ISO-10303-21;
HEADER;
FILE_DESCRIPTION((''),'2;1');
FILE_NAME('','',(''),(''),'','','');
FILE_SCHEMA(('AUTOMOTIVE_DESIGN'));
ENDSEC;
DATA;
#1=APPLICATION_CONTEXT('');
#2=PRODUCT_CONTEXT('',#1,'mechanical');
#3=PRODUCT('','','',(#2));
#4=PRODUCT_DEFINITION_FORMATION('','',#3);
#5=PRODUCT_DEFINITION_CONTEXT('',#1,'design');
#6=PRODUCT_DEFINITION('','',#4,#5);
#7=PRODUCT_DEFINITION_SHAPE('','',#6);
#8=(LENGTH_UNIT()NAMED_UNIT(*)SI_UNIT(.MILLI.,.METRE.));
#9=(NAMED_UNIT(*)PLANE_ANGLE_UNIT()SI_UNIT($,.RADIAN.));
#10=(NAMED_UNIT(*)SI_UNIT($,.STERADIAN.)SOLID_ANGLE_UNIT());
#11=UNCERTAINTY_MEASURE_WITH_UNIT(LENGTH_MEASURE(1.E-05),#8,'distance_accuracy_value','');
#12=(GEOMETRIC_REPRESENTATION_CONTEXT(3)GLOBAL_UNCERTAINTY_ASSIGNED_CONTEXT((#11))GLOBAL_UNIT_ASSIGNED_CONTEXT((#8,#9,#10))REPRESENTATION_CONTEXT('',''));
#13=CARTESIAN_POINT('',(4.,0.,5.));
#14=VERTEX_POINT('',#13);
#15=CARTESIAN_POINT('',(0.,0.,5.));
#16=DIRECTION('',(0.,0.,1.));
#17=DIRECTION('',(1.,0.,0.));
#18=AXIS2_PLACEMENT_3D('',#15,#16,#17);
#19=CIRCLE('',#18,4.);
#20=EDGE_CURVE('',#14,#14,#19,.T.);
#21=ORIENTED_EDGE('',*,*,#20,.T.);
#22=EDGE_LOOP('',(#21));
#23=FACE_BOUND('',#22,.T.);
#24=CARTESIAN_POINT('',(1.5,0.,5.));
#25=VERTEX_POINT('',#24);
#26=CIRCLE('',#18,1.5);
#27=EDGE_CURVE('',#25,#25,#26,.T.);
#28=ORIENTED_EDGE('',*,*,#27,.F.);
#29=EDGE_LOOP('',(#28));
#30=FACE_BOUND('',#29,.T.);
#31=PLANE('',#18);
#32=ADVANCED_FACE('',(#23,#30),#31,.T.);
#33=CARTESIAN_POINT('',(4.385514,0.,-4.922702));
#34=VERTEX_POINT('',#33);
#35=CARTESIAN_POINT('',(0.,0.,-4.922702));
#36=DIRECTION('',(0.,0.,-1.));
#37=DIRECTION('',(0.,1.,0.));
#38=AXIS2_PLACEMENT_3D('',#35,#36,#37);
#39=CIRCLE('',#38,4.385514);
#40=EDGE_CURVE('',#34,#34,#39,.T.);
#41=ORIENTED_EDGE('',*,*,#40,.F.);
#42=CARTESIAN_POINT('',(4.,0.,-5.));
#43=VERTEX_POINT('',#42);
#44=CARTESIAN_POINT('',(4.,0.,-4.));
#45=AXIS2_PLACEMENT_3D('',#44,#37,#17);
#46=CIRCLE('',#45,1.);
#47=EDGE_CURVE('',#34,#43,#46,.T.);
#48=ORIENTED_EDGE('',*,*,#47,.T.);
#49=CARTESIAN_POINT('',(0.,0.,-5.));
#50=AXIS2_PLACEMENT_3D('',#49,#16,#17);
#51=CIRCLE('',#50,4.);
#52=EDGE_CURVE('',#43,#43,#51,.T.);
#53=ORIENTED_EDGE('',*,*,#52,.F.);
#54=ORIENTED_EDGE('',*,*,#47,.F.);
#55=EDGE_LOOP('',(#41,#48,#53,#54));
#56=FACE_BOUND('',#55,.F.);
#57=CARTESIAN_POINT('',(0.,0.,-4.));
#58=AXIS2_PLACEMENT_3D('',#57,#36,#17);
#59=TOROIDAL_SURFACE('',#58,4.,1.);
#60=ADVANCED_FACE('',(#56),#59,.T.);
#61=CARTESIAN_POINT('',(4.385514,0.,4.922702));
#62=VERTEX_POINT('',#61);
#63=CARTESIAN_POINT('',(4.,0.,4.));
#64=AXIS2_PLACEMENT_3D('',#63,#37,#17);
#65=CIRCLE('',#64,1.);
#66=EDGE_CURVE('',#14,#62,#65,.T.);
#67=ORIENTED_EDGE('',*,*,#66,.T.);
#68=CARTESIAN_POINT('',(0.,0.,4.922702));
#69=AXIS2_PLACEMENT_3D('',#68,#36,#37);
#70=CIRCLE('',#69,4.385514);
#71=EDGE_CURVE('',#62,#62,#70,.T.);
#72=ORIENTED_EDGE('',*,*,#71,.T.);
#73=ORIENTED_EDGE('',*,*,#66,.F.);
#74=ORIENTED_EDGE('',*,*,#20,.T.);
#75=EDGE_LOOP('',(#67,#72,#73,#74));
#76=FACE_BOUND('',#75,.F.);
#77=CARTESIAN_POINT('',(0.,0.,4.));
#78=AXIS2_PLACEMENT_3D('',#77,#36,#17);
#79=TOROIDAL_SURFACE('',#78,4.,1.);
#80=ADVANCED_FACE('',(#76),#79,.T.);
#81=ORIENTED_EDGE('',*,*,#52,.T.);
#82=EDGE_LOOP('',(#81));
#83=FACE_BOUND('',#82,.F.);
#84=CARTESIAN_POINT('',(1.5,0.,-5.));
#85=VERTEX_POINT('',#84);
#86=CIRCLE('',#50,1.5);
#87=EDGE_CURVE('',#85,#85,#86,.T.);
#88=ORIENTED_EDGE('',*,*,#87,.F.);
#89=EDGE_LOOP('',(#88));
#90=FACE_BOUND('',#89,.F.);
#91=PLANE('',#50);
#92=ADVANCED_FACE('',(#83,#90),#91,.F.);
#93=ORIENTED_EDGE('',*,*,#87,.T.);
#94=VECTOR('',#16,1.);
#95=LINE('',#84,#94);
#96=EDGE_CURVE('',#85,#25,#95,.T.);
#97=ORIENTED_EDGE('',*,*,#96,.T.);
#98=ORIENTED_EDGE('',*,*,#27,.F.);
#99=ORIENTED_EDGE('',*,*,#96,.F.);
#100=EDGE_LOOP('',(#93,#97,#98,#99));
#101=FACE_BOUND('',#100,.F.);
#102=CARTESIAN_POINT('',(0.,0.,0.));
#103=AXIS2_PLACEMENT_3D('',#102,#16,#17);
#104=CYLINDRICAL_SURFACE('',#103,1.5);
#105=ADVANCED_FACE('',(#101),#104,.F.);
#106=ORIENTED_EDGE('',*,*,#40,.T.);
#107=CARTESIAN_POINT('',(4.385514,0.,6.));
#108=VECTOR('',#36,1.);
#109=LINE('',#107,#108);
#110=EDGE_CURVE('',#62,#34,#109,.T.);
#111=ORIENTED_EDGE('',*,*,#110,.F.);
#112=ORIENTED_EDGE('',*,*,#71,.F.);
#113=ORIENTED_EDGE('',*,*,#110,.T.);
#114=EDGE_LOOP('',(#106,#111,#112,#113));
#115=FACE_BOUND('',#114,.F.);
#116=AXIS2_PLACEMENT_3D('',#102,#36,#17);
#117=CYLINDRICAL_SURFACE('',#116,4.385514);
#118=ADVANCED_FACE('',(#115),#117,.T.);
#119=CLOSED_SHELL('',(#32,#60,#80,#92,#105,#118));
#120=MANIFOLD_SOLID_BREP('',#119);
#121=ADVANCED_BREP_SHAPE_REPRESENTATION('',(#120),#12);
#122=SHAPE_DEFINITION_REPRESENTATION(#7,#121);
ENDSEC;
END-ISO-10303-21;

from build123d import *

# Parameters (mm, degrees)
F0_R      = 40
F0_R_2    = 35
F1_DEPTH  = 5
F2_R      = 4.99999
F3_DEPTH  = 2.5
F4_R      = 5
F5_DEPTH  = 5
F6_R      = 1.5
F7_DEPTH  = 5
F9_DEPTH  = 2.5
F10_R     = 1
F11_R     = 44.5515786246
F11_R_2   = 4.3855137127
F12_DEPTH = 6


# Not quite as in the source:
# - a fillet or chamfer is up to 0.001 mm smaller than in the source, because OpenCascade refuses the exact size


with BuildPart() as f1:
    # F0 (on Top) → F1 (new body, symmetric)
    with BuildSketch(Plane.XY):
        Circle(F0_R)
        Circle(F0_R_2, mode=Mode.SUBTRACT)
    extrude(amount=F1_DEPTH, both=True)

    # F2 (radius 5 in the source; OpenCascade refuses exactly that, so slightly less here)
    f2_edges = [f1.edges().sort_by_distance(p)[0] for p in [
        (-40, 0, 5),
        (-40, 0, -5),
    ]]
    fillet(f2_edges, radius=F2_R)

    # F0 (on Top) → F3 (join, symmetric)
    with BuildSketch(Plane.XY):
        Circle(F0_R_2)
    extrude(amount=F3_DEPTH, both=True)

    # F4 (on Top) → F5 (join, symmetric)
    with BuildSketch(Plane.XY):
        Circle(F4_R)
    extrude(amount=F5_DEPTH, both=True)

    # F6 (on Top) → F7 (cut, symmetric)
    with BuildSketch(Plane.XY):
        Circle(F6_R)
    extrude(amount=F7_DEPTH, both=True, mode=Mode.SUBTRACT)

    # F8 (on Top) → F9 (cut, symmetric)
    with BuildSketch(Plane.XY):
        with BuildLine():
            ThreePointArc((-30.0140328654, 11.8585631023), (-31.0869388877, 8.7208064041), (-31.7860568579, 5.4792206049))
            ThreePointArc((-31.7860568579, 5.4792206049), (-31.3779575205, 3.9314640765), (-29.9653471981, 3.1787174941))
            Line((-29.9653471981, 3.1787174941), (-8.8751398211, 1.5323311534))
            ThreePointArc((-8.8751398211, 1.5323311534), (-7.8337940647, 2.2616563361), (-8.3497989023, 3.4235751))
            Line((-8.3497989023, 3.4235751), (-27.2676686416, 12.89044574))
            ThreePointArc((-27.2676686416, 12.89044574), (-28.866135701, 12.9741021828), (-30.0140328654, 11.8585631023))
        make_face()
        with BuildLine():
            ThreePointArc((-30.3900590314, -11.1791820248), (-29.2627563738, -12.3155288285), (-27.6630266578, -12.2611213303))
            Line((-27.6630266578, -12.2611213303), (-8.5751781278, -3.1418300373))
            ThreePointArc((-8.5751781278, -3.1418300373), (-8.03800884, -1.9895430233), (-9.0658415198, -1.2412942754))
            Line((-9.0658415198, -1.2412942754), (-30.1826326195, -2.5016786765))
            ThreePointArc((-30.1826326195, -2.5016786765), (-31.6087739214, -3.2284636015), (-32.0451124866, -4.7684973663))
            ThreePointArc((-32.0451124866, -4.7684973663), (-31.4053980086, -8.022327389), (-30.3900590314, -11.1791820248))
        make_face()
        with BuildLine():
            ThreePointArc((-20.8518881352, -24.9077829753), (-19.3074419941, -25.328236846), (-17.9492391699, -24.4812537124))
            Line((-17.9492391699, -24.4812537124), (-5.978323086, -7.0397915232))
            ThreePointArc((-5.978323086, -7.0397915232), (-6.0892643436, -5.7732970527), (-7.3535179291, -5.6392109685))
            Line((-7.3535179291, -5.6392109685), (-25.0110032673, -17.2891314283))
            ThreePointArc((-25.0110032673, -17.2891314283), (-25.8826854016, -18.6316162874), (-25.4905488012, -20.183493933))
            ThreePointArc((-25.4905488012, -20.183493933), (-23.3096248008, -22.6815361533), (-20.8518881352, -24.9077829753))
        make_face()
        with BuildLine():
            ThreePointArc((-5.7272893582, -32.0280147088), (-4.1795328299, -31.6199153714), (-3.4267862475, -30.207305049))
            Line((-3.4267862475, -30.207305049), (-1.7803999068, -9.117097672))
            ThreePointArc((-1.7803999068, -9.117097672), (-2.5097250895, -8.0757519156), (-3.6716438534, -8.5917567532))
            Line((-3.6716438534, -8.5917567532), (-13.1385144934, -27.5096264925))
            ThreePointArc((-13.1385144934, -27.5096264925), (-13.2221709361, -29.1080935518), (-12.1066318557, -30.2559907163))
            ThreePointArc((-12.1066318557, -30.2559907163), (-8.9688751575, -31.3288967386), (-5.7272893582, -32.0280147088))
        make_face()
        with BuildLine():
            ThreePointArc((10.9311132714, -30.6320168823), (12.0674600751, -29.5047142247), (12.0130525769, -27.9049845086))
            Line((12.0130525769, -27.9049845086), (2.8937612839, -8.8171359787))
            ThreePointArc((2.8937612839, -8.8171359787), (1.7414742699, -8.2799666909), (0.993225522, -9.3077993707))
            Line((0.993225522, -9.3077993707), (2.2536099231, -30.4245904704))
            ThreePointArc((2.2536099231, -30.4245904704), (2.9803948481, -31.8507317723), (4.5204286129, -32.2870703374))
            ThreePointArc((4.5204286129, -32.2870703374), (7.7742586356, -31.6473558595), (10.9311132714, -30.6320168823))
        make_face()
        with BuildLine():
            ThreePointArc((24.6597142219, -21.0938459861), (25.0801680926, -19.549399845), (24.233184959, -18.1911970208))
            Line((24.233184959, -18.1911970208), (6.7917227698, -6.2202809368))
            ThreePointArc((6.7917227698, -6.2202809368), (5.5252282993, -6.3312221945), (5.3911422152, -7.5954757799))
            Line((5.3911422152, -7.5954757799), (17.0410626749, -25.2529611182))
            ThreePointArc((17.0410626749, -25.2529611182), (18.383547534, -26.1246432525), (19.9354251796, -25.7325066521))
            ThreePointArc((19.9354251796, -25.7325066521), (22.4334673999, -23.5515826517), (24.6597142219, -21.0938459861))
        make_face()
        with BuildLine():
            ThreePointArc((31.7799459554, -5.9692472091), (31.371846618, -4.4214906808), (29.9592362956, -3.6687440984))
            Line((29.9592362956, -3.6687440984), (8.8690289186, -2.0223577577))
            ThreePointArc((8.8690289186, -2.0223577577), (7.8276831622, -2.7516829403), (8.3436879998, -3.9136017043))
            Line((8.3436879998, -3.9136017043), (27.2615577391, -13.3804723443))
            ThreePointArc((27.2615577391, -13.3804723443), (28.8600247985, -13.464128787), (30.0079219629, -12.3485897066))
            ThreePointArc((30.0079219629, -12.3485897066), (31.0808279852, -9.2108330083), (31.7799459554, -5.9692472091))
        make_face()
        with BuildLine():
            ThreePointArc((30.3839481289, 10.6891554205), (29.2566454713, 11.8255022243), (27.6569157553, 11.7710947261))
            Line((27.6569157553, 11.7710947261), (8.5690672253, 2.651803433))
            ThreePointArc((8.5690672253, 2.651803433), (8.0318979375, 1.499516419), (9.0597306173, 0.7512676711))
            Line((9.0597306173, 0.7512676711), (30.176521717, 2.0116520722))
            ThreePointArc((30.176521717, 2.0116520722), (31.6026630189, 2.7384369973), (32.0390015841, 4.2784707621))
            ThreePointArc((32.0390015841, 4.2784707621), (31.3992871061, 7.5323007848), (30.3839481289, 10.6891554205))
        make_face()
        with BuildLine():
            ThreePointArc((20.8457772327, 24.417756371), (19.3013310916, 24.8382102418), (17.9431282674, 23.9912271081))
            Line((17.9431282674, 23.9912271081), (5.9722121835, 6.5497649189))
            ThreePointArc((5.9722121835, 6.5497649189), (6.0831534411, 5.2832704484), (7.3474070266, 5.1491843643))
            Line((7.3474070266, 5.1491843643), (25.0048923648, 16.799104824))
            ThreePointArc((25.0048923648, 16.799104824), (25.8765744991, 18.1415896832), (25.4844378987, 19.6934673287))
            ThreePointArc((25.4844378987, 19.6934673287), (23.3035138983, 22.191509549), (20.8457772327, 24.417756371))
        make_face()
        with BuildLine():
            ThreePointArc((5.7211784557, 31.5379881045), (4.1734219274, 31.1298887671), (3.420675345, 29.7172784447))
            Line((3.420675345, 29.7172784447), (1.7742890043, 8.6270710677))
            ThreePointArc((1.7742890043, 8.6270710677), (2.503614187, 7.5857253113), (3.6655329509, 8.1017301489))
            Line((3.6655329509, 8.1017301489), (13.1324035909, 27.0195998883))
            ThreePointArc((13.1324035909, 27.0195998883), (13.2160600336, 28.6180669476), (12.1005209532, 29.7659641121))
            ThreePointArc((12.1005209532, 29.7659641121), (8.9627642549, 30.8388701343), (5.7211784557, 31.5379881045))
        make_face()
        with BuildLine():
            ThreePointArc((-10.9372241739, 30.141990278), (-12.0735709776, 29.0146876204), (-12.0191634794, 27.4149579044))
            Line((-12.0191634794, 27.4149579044), (-2.8998721864, 8.3271093745))
            ThreePointArc((-2.8998721864, 8.3271093745), (-1.7475851724, 7.7899400866), (-0.9993364245, 8.8177727664))
            Line((-0.9993364245, 8.8177727664), (-2.2597208256, 29.9345638662))
            ThreePointArc((-2.2597208256, 29.9345638662), (-2.9865057506, 31.360705168), (-4.5265395155, 31.7970437332))
            ThreePointArc((-4.5265395155, 31.7970437332), (-7.7803695381, 31.1573292552), (-10.9372241739, 30.141990278))
        make_face()
        with BuildLine():
            ThreePointArc((-24.6658251244, 20.6038193818), (-25.0862789951, 19.0593732407), (-24.2392958615, 17.7011704166))
            Line((-24.2392958615, 17.7011704166), (-6.7978336723, 5.7302543326))
            ThreePointArc((-6.7978336723, 5.7302543326), (-5.5313392018, 5.8411955902), (-5.3972531177, 7.1054491757))
            Line((-5.3972531177, 7.1054491757), (-17.0471735774, 24.7629345139))
            ThreePointArc((-17.0471735774, 24.7629345139), (-18.3896584365, 25.6346166482), (-19.9415360821, 25.2424800479))
            ThreePointArc((-19.9415360821, 25.2424800479), (-22.4395783024, 23.0615560474), (-24.6658251244, 20.6038193818))
        make_face()
    extrude(amount=F9_DEPTH, both=True, mode=Mode.SUBTRACT)

    # F10
    f10_edges = [f1.edges().sort_by_distance(p)[0] for p in [
        (-19.420244, 2.355524, 2.5),
        (-17.808734, 8.15701, 2.5),
        (-35, 0, -2.5),
        (23.303514, 22.19151, -2.5),
        (7.774259, -31.647356, -2.5),
        (15.512454, -12.205739, -2.5),
        (11.216102, -16.424218, -2.5),
        (25.080168, -19.5494, -2.5),
        (17.802623, -8.647037, -2.5),
        (-8.405079, -18.050692, -2.5),
        (-8.968875, -31.328897, -2.5),
        (7.453407, -18.36106, -2.5),
        (-25.086279, 19.059373, -2.5),
        (-12.073571, 29.014688, -2.5),
        (-23.309625, -22.681536, -2.5),
        (-16.182261, -11.464171, -2.5),
        (-31.086939, 8.720806, -2.5),
        (-11.963781, -15.760523, -2.5),
        (-29.262756, -12.315529, -2.5),
        (-31.405398, -8.022327, -2.5),
        (-18.119102, -7.701476, -2.5),
        (-22.439578, 23.061556, -2.5),
        (-17.808734, 8.15701, -2.5),
        (-11.222213, 15.934192, -2.5),
        (8.962764, 30.83887, -2.5),
        (16.17615, 10.974145, -2.5),
        (31.080828, -9.210833, -2.5),
        (18.383548, -26.124643, -2.5),
        (18.112991, 7.211449, -2.5),
        (31.399287, 7.532301, -2.5),
        (11.95767, 15.270496, -2.5),
        (2.503614, 7.585725, -2.5),
        (-7.78037, 31.157329, -2.5),
        (22.433467, -23.551583, -2.5),
        (-2.986506, 31.360705, -2.5),
        (-13.222171, -29.108094, -2.5),
        (-7.459518, 17.871034, -2.5),
        (-25.882685, -18.631616, -2.5),
        (8.398968, 17.560665, -2.5),
        (-5, 0, -5),
        (16.17615, 10.974145, 2.5),
        (25.876574, 18.14159, -2.5),
        (-2.603593, -19.662201, -2.5),
        (1.623418, -19.866195, 2.5),
        (1.623418, -19.866195, -2.5),
        (7.774259, -31.647356, 2.5),
        (11.216102, -16.424218, 2.5),
        (31.371847, -4.421491, -2.5),
        (19.618126, 1.38146, -2.5),
        (29.256645, 11.825502, -2.5),
        (-8.405079, -18.050692, 2.5),
        (-19.941536, 25.24248, 0),
        (-35, 0, 2.5),
        (-8.968875, -31.328897, 2.5),
        (-4.179533, -31.619915, -2.5),
        (7.453407, -18.36106, 2.5),
        (-11.222213, 15.934192, 2.5),
        (-15.518565, 11.715712, -2.5),
        (-5.531339, 5.841196, -2.5),
        (-28.866136, 12.974102, -2.5),
        (-15.518565, 11.715712, 2.5),
        (-25.882685, -18.631616, 2.5),
        (24.233185, -18.191197, 0),
        (4.520429, -32.28707, 0),
        (-23.309625, -22.681536, 2.5),
        (10.931113, -30.632017, 0),
        (-16.182261, -11.464171, 2.5),
        (-6.089264, -5.773297, -2.5),
        (5.721178, 31.537988, 0),
        (-12.106632, -30.255991, 0),
        (-11.963781, -15.760523, 2.5),
        (-31.608774, -3.228464, -2.5),
        (20.845777, 24.417756, 0),
        (-31.405398, -8.022327, 2.5),
        (-19.624237, -1.871486, -2.5),
        (-8.038009, -1.989543, -2.5),
        (-31.086939, 8.720806, 2.5),
        (-25.086279, 19.059373, 2.5),
        (-18.389658, 25.634617, -2.5),
        (-22.439578, 23.061556, 2.5),
        (5.391142, -7.595476, 0),
        (17.041063, -25.252961, 0),
        (-31.377958, 3.931464, -2.5),
        (24.659714, -21.093846, 0),
        (19.935425, -25.732507, 0),
        (27.261558, -13.380472, 0),
        (-5, 0, 2.5),
        (-7.459518, 17.871034, 2.5),
        (-30.014033, 11.858563, 0),
        (4.173422, 31.129889, -2.5),
        (13.21606, 28.618067, -2.5),
        (8.962764, 30.83887, 2.5),
        (2.597482, 19.172175, -2.5),
        (-4.52654, 31.797044, 0),
        (19.301331, 24.83821, -2.5),
        (-10.937224, 30.14199, 0),
        (-2.259721, 29.934564, 0),
        (-12.019163, 27.414958, 0),
        (23.303514, 22.19151, 2.5),
        (3.665533, 8.10173, 0),
        (-27.663027, -12.261121, 0),
        (-30.390059, -11.179182, 0),
        (-25.011003, -17.289131, 0),
        (-20.851888, -24.907783, 0),
        (-25.490549, -20.183494, 0),
        (-3.671644, -8.591757, 0),
        (22.433467, -23.551583, 2.5),
        (2.893761, -8.817136, 0),
        (25.080168, -19.5494, 2.5),
        (-5, 0, -2.5),
        (19.414133, -2.845551, 2.5),
        (19.414133, -2.845551, -2.5),
        (18.383548, -26.124643, 2.5),
        (-2.509725, -8.075752, -2.5),
        (18.112991, 7.211449, 2.5),
        (6.083153, 5.28327, -2.5),
        (8.398968, 17.560665, 2.5),
        (17.802623, -8.647037, 2.5),
        (15.512454, -12.205739, 2.5),
        (31.080828, -9.210833, 2.5),
        (6.791723, -6.220281, 0),
        (1.741474, -8.279967, -2.5),
        (-7.833794, 2.261656, -2.5),
        (28.860025, -13.464129, -2.5),
        (11.95767, 15.270496, 2.5),
        (-1.747585, 7.78994, -2.5),
        (-7.78037, 31.157329, 2.5),
        (-27.267669, 12.890446, 0),
        (-19.307442, -25.328237, -2.5),
        (8.343688, -3.913602, 0),
        (19.618126, 1.38146, 2.5),
        (-13.138514, -27.509626, 0),
        (31.602663, 2.738437, -2.5),
        (12.06746, -29.504714, -2.5),
        (-18.119102, -7.701476, 2.5),
        (2.980395, -31.850732, -2.5),
        (-19.624237, -1.871486, 2.5),
        (7.827683, -2.751683, -2.5),
        (5.525228, -6.331222, -2.5),
        (-7.833794, 2.261656, 2.5),
        (1.741474, -8.279967, 2.5),
        (2.980395, -31.850732, 2.5),
        (12.06746, -29.504714, 2.5),
        (-19.307442, -25.328237, 2.5),
        (-2.603593, -19.662201, 2.5),
        (-2.509725, -8.075752, 2.5),
        (-8.87514, 1.532331, 0),
        (-13.222171, -29.108094, 2.5),
        (-4.179533, -31.619915, 2.5),
        (-31.786057, 5.479221, 0),
        (-8.349799, 3.423575, 0),
        (-5.531339, 5.841196, 2.5),
        (2.25361, -30.42459, 0),
        (-6.089264, -5.773297, 2.5),
        (12.013053, -27.904985, 0),
        (-29.262756, -12.315529, 2.5),
        (25.484438, 19.693467, 0),
        (-31.608774, -3.228464, 2.5),
        (32.039002, 4.278471, 0),
        (30.383948, 10.689155, 0),
        (-8.038009, -1.989543, 2.5),
        (9.059731, 0.751268, 0),
        (-28.866136, 12.974102, 2.5),
        (-18.389658, 25.634617, 2.5),
        (31.779946, -5.969247, 0),
        (30.007922, -12.34859, 0),
        (27.656916, 11.771095, 0),
        (4.173422, 31.129889, 2.5),
        (-6.797834, 5.730254, 0),
        (2.597482, 19.172175, 2.5),
        (19.301331, 24.83821, 2.5),
        (-19.420244, 2.355524, -2.5),
        (25.876574, 18.14159, 2.5),
        (-29.965347, 3.178717, 0),
        (6.083153, 5.28327, 2.5),
        (29.959236, -3.668744, 0),
        (-5.397253, 7.105449, 0),
        (2.503614, 7.585725, 2.5),
        (-8.575178, -3.14183, 0),
        (-9.065842, -1.241294, 0),
        (-30.182633, -2.501679, 0),
        (-32.045112, -4.768497, 0),
        (-17.949239, -24.481254, 0),
        (-5.978323, -7.039792, 0),
        (-7.353518, -5.639211, 0),
        (12.100521, 29.765964, 0),
        (-3.426786, -30.207305, 0),
        (-1.7804, -9.117098, 0),
        (30.176522, 2.011652, 0),
        (31.371847, -4.421491, 2.5),
        (25.004892, 16.799105, 0),
        (13.21606, 28.618067, 2.5),
        (-24.665825, 20.603819, 0),
        (17.943128, 23.991227, 0),
        (31.399287, 7.532301, 2.5),
        (8.869029, -2.022358, 0),
        (-5.727289, -32.028015, 0),
        (28.860025, -13.464129, 2.5),
        (29.256645, 11.825502, 2.5),
        (13.132404, 27.0196, 0),
        (5.525228, -6.331222, 2.5),
        (-1.629529, 19.376168, 2.5),
        (-1.629529, 19.376168, -2.5),
        (5.972212, 6.549765, 0),
        (1.774289, 8.627071, 0),
        (8.031898, 1.499516, 2.5),
        (8.031898, 1.499516, -2.5),
        (-2.986506, 31.360705, 2.5),
        (3.420675, 29.717278, 0),
        (-5, 0, 5),
        (7.347407, 5.149184, 0),
        (-12.073571, 29.014688, 2.5),
        (-31.377958, 3.931464, 2.5),
        (7.827683, -2.751683, 2.5),
        (-17.047174, 24.762935, 0),
        (0.993226, -9.307799, 0),
        (-24.239296, 17.70117, 0),
        (31.602663, 2.738437, 2.5),
        (-0.999336, 8.817773, 0),
        (-1.747585, 7.78994, 2.5),
        (-2.899872, 8.327109, 0),
        (8.569067, 2.651803, 0),
    ]]
    fillet(f10_edges, radius=F10_R)

    # F11 (on Top) → F12 (cut, symmetric)
    with BuildSketch(Plane.XY):
        Circle(F11_R)
        Circle(F11_R_2, mode=Mode.SUBTRACT)
    extrude(amount=F12_DEPTH, both=True, mode=Mode.SUBTRACT)


solid = f1.part
